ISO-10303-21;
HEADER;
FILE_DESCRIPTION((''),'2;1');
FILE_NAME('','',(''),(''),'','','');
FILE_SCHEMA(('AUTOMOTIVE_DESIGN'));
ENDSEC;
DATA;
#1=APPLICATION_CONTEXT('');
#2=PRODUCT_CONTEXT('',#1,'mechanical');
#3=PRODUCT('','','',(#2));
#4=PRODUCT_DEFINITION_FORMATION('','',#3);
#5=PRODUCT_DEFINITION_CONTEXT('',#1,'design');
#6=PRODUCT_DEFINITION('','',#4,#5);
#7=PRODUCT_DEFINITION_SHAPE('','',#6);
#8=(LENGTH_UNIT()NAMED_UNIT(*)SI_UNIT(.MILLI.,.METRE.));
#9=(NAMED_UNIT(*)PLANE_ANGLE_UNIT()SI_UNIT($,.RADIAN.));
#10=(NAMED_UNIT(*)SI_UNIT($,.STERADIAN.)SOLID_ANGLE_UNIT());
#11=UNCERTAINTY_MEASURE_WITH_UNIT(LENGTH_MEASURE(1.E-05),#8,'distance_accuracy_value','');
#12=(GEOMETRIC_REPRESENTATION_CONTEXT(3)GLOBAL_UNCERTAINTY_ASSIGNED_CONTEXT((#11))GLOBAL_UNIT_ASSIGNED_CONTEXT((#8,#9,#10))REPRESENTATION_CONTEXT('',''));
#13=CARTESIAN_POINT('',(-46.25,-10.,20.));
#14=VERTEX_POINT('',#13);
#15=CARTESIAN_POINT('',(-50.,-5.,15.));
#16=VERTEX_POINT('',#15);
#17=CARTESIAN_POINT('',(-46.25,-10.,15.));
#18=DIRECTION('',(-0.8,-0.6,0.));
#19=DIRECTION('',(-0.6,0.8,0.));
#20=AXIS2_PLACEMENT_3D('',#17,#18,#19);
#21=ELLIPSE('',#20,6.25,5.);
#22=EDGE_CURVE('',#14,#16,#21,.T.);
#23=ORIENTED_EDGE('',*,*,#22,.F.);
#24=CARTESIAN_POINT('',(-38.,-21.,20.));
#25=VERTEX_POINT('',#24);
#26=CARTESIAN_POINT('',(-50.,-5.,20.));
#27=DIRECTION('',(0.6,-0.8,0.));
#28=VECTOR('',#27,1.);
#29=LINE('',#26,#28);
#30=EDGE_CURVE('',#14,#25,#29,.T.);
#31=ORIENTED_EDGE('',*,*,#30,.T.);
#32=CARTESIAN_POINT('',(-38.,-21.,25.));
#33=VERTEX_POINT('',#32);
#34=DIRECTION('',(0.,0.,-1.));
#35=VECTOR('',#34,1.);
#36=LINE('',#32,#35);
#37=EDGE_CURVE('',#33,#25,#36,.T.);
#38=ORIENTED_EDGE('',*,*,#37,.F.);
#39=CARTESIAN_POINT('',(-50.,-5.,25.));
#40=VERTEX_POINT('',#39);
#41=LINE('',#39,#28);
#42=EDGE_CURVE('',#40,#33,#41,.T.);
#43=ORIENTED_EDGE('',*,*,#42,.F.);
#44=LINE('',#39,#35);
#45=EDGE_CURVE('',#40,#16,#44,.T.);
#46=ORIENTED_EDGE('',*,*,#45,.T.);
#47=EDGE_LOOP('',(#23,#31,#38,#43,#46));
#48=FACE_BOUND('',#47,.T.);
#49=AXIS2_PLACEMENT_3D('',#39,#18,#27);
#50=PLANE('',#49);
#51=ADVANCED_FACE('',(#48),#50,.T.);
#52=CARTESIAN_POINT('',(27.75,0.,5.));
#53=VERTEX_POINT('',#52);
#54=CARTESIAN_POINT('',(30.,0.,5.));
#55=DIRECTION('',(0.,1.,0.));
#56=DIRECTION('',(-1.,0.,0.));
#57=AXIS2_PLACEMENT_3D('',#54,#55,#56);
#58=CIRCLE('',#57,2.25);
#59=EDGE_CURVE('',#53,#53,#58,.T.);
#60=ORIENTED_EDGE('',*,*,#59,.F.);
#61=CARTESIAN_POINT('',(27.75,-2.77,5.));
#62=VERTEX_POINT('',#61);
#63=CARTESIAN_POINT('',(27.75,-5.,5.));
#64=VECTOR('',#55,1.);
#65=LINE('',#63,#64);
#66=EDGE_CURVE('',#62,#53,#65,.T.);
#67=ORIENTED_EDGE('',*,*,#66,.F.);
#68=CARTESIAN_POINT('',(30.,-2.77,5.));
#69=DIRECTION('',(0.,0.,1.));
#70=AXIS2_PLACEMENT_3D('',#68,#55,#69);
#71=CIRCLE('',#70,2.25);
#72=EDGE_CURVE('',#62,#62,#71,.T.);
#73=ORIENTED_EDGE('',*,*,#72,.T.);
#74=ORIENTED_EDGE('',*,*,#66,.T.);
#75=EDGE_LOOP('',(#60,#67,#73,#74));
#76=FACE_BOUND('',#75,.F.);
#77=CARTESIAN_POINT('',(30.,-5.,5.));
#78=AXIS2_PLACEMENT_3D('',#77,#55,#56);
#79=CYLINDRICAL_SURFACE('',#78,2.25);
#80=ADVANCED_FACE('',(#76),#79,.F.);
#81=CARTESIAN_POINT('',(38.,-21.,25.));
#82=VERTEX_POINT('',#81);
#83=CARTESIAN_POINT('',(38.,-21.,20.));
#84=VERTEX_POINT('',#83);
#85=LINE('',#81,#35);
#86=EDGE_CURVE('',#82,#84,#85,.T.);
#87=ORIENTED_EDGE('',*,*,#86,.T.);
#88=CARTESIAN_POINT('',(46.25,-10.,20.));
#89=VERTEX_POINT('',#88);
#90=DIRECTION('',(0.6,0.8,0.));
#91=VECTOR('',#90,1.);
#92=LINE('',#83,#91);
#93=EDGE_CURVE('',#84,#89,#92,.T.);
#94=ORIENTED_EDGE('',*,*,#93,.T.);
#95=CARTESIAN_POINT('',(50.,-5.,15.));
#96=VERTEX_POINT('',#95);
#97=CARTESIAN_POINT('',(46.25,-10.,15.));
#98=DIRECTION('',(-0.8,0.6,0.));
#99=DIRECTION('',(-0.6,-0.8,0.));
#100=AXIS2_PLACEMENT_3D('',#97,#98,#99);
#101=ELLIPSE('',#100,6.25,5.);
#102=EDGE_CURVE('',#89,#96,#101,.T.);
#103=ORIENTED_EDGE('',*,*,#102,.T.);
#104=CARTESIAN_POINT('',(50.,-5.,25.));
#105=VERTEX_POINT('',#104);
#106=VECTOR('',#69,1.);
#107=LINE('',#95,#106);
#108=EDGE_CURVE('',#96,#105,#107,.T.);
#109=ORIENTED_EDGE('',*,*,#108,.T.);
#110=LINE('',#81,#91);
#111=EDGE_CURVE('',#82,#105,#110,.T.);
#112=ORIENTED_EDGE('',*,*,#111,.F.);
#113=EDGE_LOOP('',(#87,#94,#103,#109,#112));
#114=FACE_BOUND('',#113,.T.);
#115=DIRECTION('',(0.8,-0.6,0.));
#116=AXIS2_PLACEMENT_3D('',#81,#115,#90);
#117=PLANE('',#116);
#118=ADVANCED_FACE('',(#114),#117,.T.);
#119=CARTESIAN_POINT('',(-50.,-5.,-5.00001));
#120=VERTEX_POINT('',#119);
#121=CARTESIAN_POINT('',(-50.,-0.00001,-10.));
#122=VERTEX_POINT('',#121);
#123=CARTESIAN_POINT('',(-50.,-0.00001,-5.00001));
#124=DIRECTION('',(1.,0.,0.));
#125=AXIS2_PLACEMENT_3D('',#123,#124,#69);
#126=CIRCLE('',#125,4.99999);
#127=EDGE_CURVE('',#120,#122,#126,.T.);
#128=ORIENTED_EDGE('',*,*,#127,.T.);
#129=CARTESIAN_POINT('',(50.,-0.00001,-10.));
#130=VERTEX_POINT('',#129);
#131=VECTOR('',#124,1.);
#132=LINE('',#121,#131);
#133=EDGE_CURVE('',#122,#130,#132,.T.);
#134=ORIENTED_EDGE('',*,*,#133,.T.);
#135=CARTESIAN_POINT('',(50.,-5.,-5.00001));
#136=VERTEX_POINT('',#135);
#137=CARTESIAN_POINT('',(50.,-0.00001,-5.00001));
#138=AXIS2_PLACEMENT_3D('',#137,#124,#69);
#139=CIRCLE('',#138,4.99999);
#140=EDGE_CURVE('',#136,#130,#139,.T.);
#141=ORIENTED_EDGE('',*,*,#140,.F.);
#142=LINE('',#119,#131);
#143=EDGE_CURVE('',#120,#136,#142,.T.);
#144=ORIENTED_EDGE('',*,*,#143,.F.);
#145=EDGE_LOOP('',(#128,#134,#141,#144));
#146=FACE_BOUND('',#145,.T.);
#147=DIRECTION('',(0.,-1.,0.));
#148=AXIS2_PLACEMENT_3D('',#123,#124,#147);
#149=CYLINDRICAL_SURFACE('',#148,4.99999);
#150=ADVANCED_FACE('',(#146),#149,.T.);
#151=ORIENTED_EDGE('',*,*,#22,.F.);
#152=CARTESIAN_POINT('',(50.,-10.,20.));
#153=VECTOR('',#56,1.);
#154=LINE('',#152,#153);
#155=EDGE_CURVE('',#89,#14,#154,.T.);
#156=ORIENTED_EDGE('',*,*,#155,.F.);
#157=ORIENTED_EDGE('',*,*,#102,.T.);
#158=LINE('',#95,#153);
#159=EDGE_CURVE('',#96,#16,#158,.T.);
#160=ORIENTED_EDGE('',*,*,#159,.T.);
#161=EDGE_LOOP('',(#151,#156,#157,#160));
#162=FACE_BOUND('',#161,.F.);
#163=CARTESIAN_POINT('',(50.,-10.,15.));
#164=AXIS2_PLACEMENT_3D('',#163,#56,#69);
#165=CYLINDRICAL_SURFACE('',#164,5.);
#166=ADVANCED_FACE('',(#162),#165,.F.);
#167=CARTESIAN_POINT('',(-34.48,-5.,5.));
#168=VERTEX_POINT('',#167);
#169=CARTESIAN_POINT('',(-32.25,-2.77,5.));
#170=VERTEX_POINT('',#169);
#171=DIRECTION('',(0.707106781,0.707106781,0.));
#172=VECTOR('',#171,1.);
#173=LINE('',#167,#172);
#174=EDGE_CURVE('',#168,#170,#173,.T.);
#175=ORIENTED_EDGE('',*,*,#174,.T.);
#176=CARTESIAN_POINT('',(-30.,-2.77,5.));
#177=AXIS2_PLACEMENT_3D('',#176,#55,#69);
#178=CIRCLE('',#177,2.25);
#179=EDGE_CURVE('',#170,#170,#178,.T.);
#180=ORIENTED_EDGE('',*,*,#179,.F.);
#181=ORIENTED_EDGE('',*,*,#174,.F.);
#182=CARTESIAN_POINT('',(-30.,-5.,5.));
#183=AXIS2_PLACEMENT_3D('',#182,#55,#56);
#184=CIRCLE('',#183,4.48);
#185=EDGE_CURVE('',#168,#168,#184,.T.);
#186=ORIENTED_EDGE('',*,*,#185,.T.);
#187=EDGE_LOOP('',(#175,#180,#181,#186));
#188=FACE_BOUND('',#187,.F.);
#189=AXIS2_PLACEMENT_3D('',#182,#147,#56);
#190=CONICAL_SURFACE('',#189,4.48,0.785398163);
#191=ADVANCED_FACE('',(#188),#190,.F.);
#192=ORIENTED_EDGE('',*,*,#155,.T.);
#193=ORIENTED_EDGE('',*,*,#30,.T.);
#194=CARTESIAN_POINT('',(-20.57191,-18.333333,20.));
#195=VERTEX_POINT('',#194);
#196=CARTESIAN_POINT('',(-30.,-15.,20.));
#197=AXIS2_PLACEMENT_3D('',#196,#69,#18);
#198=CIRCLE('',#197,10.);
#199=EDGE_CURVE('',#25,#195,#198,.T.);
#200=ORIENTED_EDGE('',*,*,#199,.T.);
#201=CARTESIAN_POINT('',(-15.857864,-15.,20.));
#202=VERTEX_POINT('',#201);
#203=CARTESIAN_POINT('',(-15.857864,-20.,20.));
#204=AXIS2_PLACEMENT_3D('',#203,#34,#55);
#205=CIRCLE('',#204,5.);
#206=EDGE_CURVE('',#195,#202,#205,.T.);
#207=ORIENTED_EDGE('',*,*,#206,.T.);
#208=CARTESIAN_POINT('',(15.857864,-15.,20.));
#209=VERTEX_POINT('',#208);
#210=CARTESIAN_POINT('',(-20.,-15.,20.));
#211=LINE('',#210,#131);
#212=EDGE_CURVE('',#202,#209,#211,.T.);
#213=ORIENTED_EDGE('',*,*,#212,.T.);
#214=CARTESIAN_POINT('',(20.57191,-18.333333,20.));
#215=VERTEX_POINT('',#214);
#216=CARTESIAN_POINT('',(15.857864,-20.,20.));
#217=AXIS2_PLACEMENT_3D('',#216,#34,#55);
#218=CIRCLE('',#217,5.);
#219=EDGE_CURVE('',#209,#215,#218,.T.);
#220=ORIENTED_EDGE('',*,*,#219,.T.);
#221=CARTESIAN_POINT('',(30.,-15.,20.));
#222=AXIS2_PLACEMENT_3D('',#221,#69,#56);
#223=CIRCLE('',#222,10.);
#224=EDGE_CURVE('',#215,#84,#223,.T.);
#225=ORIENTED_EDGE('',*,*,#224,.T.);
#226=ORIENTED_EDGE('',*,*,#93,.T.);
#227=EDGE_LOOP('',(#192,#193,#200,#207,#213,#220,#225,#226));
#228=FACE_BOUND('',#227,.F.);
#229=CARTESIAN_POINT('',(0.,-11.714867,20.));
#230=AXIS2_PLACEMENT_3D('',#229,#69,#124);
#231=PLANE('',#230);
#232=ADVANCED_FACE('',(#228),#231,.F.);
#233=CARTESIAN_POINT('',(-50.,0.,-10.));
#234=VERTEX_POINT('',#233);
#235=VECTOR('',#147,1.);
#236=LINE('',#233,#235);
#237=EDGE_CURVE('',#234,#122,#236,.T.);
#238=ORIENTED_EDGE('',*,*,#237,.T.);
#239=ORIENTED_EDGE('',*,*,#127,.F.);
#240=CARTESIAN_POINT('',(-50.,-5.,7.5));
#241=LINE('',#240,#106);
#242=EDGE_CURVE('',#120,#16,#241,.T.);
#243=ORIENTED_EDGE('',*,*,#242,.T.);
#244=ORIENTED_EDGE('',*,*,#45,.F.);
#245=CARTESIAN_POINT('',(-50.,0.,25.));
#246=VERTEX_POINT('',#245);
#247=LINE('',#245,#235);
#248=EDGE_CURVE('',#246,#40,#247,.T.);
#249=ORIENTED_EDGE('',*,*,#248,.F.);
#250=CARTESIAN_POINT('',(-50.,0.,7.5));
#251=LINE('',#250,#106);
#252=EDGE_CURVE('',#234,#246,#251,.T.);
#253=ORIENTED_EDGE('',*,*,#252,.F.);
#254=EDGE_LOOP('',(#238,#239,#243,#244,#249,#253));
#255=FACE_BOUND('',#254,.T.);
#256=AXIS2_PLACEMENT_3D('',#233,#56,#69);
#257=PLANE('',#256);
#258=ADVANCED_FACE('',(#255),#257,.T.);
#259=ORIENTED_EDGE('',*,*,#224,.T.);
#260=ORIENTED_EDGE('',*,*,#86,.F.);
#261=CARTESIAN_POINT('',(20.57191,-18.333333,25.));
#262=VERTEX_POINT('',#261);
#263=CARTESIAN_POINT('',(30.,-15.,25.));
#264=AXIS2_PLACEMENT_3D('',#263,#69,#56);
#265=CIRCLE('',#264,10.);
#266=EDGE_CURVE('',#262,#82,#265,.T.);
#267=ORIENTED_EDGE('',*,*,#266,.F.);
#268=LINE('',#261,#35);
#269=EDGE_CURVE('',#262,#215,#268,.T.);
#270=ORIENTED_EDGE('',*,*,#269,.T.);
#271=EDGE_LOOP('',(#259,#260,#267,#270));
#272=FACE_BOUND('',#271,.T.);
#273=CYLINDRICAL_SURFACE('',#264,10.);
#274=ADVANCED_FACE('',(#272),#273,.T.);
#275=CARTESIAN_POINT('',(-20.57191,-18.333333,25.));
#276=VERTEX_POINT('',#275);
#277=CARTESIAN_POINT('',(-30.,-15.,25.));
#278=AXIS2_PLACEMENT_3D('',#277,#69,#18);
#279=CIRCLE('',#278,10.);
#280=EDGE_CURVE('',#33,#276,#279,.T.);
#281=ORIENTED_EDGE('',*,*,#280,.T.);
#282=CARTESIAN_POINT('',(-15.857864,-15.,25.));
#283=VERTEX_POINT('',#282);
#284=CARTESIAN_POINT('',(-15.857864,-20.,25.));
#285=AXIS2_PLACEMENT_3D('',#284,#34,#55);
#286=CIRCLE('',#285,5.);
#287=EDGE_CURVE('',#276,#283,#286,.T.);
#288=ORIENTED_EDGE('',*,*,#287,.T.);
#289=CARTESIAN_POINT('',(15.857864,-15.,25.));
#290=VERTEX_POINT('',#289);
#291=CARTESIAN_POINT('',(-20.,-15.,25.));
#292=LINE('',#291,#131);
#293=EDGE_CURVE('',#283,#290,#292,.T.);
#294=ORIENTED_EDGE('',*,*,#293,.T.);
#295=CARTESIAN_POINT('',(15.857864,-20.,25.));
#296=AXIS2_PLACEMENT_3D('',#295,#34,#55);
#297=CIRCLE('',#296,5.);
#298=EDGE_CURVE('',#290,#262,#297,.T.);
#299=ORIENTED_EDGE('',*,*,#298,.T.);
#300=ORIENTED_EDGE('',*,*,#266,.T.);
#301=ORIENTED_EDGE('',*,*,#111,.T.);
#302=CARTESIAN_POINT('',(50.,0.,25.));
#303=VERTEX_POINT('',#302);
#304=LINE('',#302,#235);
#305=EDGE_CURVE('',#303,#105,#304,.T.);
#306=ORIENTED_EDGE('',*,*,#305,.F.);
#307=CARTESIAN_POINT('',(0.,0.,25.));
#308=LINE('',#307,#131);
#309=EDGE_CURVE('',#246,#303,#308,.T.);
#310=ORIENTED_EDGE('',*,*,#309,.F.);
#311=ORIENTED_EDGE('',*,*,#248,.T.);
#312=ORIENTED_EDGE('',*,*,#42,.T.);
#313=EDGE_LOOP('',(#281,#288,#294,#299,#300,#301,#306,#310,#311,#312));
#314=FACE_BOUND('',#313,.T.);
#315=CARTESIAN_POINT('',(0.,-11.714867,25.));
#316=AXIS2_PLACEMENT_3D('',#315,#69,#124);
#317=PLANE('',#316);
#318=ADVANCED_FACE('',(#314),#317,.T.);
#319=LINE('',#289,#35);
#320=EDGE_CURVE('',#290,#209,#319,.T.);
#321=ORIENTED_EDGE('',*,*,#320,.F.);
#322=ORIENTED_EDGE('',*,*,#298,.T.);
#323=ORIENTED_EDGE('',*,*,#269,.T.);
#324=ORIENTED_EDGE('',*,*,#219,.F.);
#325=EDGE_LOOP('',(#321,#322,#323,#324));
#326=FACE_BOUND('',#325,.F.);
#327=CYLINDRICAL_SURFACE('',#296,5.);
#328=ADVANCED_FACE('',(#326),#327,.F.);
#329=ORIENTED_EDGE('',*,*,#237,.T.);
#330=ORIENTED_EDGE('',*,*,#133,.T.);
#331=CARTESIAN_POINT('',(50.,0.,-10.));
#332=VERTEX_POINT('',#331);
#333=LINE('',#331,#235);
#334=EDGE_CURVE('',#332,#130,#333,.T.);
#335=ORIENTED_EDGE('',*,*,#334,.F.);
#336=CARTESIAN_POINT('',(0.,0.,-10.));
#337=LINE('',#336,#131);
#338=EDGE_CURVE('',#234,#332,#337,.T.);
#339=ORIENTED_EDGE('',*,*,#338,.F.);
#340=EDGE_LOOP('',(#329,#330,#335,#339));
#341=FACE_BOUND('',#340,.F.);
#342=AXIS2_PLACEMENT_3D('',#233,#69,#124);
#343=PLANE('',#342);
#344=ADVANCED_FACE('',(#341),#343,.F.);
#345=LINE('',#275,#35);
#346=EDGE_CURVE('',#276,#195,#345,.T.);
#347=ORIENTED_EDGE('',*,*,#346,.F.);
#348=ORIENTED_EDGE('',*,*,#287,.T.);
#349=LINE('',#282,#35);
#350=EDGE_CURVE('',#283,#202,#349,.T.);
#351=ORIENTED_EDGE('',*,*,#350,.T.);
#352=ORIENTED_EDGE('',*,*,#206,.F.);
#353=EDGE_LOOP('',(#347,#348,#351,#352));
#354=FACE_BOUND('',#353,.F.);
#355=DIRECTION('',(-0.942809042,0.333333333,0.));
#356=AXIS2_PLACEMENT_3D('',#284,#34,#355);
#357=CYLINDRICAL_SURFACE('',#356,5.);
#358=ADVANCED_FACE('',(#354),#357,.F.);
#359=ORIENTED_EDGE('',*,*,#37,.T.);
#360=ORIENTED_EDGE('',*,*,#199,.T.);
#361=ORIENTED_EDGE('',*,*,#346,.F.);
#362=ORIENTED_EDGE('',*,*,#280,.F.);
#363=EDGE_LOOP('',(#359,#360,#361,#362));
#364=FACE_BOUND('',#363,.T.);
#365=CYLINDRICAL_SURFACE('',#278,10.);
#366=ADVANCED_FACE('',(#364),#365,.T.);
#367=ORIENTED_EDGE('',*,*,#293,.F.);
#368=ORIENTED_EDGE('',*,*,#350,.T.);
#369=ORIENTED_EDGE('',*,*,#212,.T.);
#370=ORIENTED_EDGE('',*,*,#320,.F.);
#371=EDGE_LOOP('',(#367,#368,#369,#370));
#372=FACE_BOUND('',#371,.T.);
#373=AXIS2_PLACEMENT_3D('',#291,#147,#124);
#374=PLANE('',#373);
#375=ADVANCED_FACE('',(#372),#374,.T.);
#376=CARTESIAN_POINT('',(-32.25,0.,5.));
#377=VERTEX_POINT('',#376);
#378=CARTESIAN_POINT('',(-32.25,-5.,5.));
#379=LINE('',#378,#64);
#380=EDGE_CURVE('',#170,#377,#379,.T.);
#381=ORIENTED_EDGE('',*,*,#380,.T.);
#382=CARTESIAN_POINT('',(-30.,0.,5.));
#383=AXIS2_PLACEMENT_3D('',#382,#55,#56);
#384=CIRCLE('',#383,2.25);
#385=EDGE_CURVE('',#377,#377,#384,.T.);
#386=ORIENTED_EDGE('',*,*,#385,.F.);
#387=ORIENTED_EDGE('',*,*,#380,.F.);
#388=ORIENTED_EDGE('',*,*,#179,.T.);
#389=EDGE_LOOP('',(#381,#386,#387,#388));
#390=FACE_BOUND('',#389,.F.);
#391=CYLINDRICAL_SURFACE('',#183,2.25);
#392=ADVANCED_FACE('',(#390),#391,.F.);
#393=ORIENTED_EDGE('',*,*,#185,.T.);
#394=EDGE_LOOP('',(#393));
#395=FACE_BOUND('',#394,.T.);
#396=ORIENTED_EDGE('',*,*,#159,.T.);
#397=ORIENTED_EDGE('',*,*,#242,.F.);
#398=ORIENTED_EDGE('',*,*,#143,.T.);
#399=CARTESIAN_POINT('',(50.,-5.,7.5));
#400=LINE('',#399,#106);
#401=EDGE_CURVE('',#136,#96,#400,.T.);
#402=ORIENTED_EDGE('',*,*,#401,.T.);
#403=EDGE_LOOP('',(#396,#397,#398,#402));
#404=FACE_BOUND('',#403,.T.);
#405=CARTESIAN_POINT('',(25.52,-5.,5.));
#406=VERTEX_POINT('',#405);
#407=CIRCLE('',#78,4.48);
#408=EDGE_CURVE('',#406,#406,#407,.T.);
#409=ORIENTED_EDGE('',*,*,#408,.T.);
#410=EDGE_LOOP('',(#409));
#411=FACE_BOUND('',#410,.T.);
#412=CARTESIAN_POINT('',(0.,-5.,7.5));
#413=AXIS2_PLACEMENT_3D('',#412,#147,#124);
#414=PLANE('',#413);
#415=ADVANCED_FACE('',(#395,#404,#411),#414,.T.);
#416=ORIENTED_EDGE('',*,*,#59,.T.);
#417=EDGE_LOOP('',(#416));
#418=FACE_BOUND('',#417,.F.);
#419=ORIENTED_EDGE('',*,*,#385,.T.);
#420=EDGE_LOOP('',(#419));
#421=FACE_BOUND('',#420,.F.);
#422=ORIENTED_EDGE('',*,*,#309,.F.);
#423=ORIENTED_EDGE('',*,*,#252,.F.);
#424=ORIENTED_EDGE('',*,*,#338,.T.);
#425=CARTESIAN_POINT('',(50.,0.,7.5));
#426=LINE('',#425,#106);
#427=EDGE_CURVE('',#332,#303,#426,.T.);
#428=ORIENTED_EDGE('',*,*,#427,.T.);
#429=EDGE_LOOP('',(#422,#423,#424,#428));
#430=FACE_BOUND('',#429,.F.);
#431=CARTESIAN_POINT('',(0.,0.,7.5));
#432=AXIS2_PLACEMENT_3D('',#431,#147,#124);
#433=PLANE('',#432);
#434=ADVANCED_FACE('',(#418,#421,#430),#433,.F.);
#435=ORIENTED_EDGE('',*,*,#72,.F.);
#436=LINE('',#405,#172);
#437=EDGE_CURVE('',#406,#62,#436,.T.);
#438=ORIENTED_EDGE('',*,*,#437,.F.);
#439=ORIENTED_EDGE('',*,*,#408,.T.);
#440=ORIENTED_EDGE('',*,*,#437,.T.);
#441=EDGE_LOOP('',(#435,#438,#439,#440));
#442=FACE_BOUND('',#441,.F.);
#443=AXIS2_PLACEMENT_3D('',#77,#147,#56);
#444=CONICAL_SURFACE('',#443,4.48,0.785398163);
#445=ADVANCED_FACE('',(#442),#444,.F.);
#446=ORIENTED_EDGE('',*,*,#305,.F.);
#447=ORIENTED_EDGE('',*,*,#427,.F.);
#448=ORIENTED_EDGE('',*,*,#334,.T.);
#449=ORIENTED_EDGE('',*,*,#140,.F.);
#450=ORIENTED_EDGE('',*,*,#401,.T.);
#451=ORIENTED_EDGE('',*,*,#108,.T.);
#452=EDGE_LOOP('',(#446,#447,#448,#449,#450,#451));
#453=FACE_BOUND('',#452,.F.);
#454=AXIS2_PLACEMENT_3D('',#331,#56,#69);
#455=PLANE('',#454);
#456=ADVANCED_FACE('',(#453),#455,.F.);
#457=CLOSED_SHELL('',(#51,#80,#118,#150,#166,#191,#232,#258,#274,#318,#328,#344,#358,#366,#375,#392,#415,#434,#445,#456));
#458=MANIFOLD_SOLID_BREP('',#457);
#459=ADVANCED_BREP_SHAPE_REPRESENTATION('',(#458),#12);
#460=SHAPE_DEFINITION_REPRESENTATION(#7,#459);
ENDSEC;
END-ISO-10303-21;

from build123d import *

# Parameters (mm, degrees)
F0_W           = 100
F0_H           = 35
F1_DEPTH       = 5
F3_DEPTH       = 5
F4_R           = 5
F5_R           = 4.99999
F7_D           = 4.5
F7_CSINK_D     = 8.96
F7_CSINK_ANGLE = 90


# Not quite as in the source:
# - a fillet or chamfer is up to 0.001 mm smaller than in the source, because OpenCascade refuses the exact size


with BuildPart() as f1:
    # F0 (on Front) → F1 (new body)
    with BuildSketch(Plane.XZ):
        with Locations((0, 7.5)):
            Rectangle(F0_W, F0_H)
    extrude(amount=F1_DEPTH)

    # F2 (on face) → F3 (join)
    with BuildSketch(Plane.XY.offset(25)):
        with BuildLine():
            Line((-50, -5), (-38, -21))
            ThreePointArc((-38, -21), (-26.8377223398, -24.4868329805), (-20, -15))
            Line((-20, -15), (20, -15))
            ThreePointArc((20, -15), (26.8377223398, -24.4868329805), (38, -21))
            Line((38, -21), (50, -5))
            Line((50, -5), (-50, -5))
        make_face()
    extrude(amount=-F3_DEPTH)

    # F4
    f4_edges = [f1.edges().sort_by_distance(p)[0] for p in [
        (-20, -15, 22.5),
        (0, -5, 20),
        (20, -15, 22.5),
    ]]
    fillet(f4_edges, radius=F4_R)

    # F5 (radius 5 in the source; OpenCascade refuses exactly that, so slightly less here)
    f5_edges = [f1.edges().sort_by_distance(p)[0] for p in [
        (0, -5, -10),
    ]]
    fillet(f5_edges, radius=F5_R)

    # F7 (through all)
    with Locations(Plane.XZ.offset(5)):
        with Locations((-30, 5), (30, 5)):
            CounterSinkHole(F7_D / 2, F7_CSINK_D / 2, counter_sink_angle=F7_CSINK_ANGLE)


solid = f1.part
